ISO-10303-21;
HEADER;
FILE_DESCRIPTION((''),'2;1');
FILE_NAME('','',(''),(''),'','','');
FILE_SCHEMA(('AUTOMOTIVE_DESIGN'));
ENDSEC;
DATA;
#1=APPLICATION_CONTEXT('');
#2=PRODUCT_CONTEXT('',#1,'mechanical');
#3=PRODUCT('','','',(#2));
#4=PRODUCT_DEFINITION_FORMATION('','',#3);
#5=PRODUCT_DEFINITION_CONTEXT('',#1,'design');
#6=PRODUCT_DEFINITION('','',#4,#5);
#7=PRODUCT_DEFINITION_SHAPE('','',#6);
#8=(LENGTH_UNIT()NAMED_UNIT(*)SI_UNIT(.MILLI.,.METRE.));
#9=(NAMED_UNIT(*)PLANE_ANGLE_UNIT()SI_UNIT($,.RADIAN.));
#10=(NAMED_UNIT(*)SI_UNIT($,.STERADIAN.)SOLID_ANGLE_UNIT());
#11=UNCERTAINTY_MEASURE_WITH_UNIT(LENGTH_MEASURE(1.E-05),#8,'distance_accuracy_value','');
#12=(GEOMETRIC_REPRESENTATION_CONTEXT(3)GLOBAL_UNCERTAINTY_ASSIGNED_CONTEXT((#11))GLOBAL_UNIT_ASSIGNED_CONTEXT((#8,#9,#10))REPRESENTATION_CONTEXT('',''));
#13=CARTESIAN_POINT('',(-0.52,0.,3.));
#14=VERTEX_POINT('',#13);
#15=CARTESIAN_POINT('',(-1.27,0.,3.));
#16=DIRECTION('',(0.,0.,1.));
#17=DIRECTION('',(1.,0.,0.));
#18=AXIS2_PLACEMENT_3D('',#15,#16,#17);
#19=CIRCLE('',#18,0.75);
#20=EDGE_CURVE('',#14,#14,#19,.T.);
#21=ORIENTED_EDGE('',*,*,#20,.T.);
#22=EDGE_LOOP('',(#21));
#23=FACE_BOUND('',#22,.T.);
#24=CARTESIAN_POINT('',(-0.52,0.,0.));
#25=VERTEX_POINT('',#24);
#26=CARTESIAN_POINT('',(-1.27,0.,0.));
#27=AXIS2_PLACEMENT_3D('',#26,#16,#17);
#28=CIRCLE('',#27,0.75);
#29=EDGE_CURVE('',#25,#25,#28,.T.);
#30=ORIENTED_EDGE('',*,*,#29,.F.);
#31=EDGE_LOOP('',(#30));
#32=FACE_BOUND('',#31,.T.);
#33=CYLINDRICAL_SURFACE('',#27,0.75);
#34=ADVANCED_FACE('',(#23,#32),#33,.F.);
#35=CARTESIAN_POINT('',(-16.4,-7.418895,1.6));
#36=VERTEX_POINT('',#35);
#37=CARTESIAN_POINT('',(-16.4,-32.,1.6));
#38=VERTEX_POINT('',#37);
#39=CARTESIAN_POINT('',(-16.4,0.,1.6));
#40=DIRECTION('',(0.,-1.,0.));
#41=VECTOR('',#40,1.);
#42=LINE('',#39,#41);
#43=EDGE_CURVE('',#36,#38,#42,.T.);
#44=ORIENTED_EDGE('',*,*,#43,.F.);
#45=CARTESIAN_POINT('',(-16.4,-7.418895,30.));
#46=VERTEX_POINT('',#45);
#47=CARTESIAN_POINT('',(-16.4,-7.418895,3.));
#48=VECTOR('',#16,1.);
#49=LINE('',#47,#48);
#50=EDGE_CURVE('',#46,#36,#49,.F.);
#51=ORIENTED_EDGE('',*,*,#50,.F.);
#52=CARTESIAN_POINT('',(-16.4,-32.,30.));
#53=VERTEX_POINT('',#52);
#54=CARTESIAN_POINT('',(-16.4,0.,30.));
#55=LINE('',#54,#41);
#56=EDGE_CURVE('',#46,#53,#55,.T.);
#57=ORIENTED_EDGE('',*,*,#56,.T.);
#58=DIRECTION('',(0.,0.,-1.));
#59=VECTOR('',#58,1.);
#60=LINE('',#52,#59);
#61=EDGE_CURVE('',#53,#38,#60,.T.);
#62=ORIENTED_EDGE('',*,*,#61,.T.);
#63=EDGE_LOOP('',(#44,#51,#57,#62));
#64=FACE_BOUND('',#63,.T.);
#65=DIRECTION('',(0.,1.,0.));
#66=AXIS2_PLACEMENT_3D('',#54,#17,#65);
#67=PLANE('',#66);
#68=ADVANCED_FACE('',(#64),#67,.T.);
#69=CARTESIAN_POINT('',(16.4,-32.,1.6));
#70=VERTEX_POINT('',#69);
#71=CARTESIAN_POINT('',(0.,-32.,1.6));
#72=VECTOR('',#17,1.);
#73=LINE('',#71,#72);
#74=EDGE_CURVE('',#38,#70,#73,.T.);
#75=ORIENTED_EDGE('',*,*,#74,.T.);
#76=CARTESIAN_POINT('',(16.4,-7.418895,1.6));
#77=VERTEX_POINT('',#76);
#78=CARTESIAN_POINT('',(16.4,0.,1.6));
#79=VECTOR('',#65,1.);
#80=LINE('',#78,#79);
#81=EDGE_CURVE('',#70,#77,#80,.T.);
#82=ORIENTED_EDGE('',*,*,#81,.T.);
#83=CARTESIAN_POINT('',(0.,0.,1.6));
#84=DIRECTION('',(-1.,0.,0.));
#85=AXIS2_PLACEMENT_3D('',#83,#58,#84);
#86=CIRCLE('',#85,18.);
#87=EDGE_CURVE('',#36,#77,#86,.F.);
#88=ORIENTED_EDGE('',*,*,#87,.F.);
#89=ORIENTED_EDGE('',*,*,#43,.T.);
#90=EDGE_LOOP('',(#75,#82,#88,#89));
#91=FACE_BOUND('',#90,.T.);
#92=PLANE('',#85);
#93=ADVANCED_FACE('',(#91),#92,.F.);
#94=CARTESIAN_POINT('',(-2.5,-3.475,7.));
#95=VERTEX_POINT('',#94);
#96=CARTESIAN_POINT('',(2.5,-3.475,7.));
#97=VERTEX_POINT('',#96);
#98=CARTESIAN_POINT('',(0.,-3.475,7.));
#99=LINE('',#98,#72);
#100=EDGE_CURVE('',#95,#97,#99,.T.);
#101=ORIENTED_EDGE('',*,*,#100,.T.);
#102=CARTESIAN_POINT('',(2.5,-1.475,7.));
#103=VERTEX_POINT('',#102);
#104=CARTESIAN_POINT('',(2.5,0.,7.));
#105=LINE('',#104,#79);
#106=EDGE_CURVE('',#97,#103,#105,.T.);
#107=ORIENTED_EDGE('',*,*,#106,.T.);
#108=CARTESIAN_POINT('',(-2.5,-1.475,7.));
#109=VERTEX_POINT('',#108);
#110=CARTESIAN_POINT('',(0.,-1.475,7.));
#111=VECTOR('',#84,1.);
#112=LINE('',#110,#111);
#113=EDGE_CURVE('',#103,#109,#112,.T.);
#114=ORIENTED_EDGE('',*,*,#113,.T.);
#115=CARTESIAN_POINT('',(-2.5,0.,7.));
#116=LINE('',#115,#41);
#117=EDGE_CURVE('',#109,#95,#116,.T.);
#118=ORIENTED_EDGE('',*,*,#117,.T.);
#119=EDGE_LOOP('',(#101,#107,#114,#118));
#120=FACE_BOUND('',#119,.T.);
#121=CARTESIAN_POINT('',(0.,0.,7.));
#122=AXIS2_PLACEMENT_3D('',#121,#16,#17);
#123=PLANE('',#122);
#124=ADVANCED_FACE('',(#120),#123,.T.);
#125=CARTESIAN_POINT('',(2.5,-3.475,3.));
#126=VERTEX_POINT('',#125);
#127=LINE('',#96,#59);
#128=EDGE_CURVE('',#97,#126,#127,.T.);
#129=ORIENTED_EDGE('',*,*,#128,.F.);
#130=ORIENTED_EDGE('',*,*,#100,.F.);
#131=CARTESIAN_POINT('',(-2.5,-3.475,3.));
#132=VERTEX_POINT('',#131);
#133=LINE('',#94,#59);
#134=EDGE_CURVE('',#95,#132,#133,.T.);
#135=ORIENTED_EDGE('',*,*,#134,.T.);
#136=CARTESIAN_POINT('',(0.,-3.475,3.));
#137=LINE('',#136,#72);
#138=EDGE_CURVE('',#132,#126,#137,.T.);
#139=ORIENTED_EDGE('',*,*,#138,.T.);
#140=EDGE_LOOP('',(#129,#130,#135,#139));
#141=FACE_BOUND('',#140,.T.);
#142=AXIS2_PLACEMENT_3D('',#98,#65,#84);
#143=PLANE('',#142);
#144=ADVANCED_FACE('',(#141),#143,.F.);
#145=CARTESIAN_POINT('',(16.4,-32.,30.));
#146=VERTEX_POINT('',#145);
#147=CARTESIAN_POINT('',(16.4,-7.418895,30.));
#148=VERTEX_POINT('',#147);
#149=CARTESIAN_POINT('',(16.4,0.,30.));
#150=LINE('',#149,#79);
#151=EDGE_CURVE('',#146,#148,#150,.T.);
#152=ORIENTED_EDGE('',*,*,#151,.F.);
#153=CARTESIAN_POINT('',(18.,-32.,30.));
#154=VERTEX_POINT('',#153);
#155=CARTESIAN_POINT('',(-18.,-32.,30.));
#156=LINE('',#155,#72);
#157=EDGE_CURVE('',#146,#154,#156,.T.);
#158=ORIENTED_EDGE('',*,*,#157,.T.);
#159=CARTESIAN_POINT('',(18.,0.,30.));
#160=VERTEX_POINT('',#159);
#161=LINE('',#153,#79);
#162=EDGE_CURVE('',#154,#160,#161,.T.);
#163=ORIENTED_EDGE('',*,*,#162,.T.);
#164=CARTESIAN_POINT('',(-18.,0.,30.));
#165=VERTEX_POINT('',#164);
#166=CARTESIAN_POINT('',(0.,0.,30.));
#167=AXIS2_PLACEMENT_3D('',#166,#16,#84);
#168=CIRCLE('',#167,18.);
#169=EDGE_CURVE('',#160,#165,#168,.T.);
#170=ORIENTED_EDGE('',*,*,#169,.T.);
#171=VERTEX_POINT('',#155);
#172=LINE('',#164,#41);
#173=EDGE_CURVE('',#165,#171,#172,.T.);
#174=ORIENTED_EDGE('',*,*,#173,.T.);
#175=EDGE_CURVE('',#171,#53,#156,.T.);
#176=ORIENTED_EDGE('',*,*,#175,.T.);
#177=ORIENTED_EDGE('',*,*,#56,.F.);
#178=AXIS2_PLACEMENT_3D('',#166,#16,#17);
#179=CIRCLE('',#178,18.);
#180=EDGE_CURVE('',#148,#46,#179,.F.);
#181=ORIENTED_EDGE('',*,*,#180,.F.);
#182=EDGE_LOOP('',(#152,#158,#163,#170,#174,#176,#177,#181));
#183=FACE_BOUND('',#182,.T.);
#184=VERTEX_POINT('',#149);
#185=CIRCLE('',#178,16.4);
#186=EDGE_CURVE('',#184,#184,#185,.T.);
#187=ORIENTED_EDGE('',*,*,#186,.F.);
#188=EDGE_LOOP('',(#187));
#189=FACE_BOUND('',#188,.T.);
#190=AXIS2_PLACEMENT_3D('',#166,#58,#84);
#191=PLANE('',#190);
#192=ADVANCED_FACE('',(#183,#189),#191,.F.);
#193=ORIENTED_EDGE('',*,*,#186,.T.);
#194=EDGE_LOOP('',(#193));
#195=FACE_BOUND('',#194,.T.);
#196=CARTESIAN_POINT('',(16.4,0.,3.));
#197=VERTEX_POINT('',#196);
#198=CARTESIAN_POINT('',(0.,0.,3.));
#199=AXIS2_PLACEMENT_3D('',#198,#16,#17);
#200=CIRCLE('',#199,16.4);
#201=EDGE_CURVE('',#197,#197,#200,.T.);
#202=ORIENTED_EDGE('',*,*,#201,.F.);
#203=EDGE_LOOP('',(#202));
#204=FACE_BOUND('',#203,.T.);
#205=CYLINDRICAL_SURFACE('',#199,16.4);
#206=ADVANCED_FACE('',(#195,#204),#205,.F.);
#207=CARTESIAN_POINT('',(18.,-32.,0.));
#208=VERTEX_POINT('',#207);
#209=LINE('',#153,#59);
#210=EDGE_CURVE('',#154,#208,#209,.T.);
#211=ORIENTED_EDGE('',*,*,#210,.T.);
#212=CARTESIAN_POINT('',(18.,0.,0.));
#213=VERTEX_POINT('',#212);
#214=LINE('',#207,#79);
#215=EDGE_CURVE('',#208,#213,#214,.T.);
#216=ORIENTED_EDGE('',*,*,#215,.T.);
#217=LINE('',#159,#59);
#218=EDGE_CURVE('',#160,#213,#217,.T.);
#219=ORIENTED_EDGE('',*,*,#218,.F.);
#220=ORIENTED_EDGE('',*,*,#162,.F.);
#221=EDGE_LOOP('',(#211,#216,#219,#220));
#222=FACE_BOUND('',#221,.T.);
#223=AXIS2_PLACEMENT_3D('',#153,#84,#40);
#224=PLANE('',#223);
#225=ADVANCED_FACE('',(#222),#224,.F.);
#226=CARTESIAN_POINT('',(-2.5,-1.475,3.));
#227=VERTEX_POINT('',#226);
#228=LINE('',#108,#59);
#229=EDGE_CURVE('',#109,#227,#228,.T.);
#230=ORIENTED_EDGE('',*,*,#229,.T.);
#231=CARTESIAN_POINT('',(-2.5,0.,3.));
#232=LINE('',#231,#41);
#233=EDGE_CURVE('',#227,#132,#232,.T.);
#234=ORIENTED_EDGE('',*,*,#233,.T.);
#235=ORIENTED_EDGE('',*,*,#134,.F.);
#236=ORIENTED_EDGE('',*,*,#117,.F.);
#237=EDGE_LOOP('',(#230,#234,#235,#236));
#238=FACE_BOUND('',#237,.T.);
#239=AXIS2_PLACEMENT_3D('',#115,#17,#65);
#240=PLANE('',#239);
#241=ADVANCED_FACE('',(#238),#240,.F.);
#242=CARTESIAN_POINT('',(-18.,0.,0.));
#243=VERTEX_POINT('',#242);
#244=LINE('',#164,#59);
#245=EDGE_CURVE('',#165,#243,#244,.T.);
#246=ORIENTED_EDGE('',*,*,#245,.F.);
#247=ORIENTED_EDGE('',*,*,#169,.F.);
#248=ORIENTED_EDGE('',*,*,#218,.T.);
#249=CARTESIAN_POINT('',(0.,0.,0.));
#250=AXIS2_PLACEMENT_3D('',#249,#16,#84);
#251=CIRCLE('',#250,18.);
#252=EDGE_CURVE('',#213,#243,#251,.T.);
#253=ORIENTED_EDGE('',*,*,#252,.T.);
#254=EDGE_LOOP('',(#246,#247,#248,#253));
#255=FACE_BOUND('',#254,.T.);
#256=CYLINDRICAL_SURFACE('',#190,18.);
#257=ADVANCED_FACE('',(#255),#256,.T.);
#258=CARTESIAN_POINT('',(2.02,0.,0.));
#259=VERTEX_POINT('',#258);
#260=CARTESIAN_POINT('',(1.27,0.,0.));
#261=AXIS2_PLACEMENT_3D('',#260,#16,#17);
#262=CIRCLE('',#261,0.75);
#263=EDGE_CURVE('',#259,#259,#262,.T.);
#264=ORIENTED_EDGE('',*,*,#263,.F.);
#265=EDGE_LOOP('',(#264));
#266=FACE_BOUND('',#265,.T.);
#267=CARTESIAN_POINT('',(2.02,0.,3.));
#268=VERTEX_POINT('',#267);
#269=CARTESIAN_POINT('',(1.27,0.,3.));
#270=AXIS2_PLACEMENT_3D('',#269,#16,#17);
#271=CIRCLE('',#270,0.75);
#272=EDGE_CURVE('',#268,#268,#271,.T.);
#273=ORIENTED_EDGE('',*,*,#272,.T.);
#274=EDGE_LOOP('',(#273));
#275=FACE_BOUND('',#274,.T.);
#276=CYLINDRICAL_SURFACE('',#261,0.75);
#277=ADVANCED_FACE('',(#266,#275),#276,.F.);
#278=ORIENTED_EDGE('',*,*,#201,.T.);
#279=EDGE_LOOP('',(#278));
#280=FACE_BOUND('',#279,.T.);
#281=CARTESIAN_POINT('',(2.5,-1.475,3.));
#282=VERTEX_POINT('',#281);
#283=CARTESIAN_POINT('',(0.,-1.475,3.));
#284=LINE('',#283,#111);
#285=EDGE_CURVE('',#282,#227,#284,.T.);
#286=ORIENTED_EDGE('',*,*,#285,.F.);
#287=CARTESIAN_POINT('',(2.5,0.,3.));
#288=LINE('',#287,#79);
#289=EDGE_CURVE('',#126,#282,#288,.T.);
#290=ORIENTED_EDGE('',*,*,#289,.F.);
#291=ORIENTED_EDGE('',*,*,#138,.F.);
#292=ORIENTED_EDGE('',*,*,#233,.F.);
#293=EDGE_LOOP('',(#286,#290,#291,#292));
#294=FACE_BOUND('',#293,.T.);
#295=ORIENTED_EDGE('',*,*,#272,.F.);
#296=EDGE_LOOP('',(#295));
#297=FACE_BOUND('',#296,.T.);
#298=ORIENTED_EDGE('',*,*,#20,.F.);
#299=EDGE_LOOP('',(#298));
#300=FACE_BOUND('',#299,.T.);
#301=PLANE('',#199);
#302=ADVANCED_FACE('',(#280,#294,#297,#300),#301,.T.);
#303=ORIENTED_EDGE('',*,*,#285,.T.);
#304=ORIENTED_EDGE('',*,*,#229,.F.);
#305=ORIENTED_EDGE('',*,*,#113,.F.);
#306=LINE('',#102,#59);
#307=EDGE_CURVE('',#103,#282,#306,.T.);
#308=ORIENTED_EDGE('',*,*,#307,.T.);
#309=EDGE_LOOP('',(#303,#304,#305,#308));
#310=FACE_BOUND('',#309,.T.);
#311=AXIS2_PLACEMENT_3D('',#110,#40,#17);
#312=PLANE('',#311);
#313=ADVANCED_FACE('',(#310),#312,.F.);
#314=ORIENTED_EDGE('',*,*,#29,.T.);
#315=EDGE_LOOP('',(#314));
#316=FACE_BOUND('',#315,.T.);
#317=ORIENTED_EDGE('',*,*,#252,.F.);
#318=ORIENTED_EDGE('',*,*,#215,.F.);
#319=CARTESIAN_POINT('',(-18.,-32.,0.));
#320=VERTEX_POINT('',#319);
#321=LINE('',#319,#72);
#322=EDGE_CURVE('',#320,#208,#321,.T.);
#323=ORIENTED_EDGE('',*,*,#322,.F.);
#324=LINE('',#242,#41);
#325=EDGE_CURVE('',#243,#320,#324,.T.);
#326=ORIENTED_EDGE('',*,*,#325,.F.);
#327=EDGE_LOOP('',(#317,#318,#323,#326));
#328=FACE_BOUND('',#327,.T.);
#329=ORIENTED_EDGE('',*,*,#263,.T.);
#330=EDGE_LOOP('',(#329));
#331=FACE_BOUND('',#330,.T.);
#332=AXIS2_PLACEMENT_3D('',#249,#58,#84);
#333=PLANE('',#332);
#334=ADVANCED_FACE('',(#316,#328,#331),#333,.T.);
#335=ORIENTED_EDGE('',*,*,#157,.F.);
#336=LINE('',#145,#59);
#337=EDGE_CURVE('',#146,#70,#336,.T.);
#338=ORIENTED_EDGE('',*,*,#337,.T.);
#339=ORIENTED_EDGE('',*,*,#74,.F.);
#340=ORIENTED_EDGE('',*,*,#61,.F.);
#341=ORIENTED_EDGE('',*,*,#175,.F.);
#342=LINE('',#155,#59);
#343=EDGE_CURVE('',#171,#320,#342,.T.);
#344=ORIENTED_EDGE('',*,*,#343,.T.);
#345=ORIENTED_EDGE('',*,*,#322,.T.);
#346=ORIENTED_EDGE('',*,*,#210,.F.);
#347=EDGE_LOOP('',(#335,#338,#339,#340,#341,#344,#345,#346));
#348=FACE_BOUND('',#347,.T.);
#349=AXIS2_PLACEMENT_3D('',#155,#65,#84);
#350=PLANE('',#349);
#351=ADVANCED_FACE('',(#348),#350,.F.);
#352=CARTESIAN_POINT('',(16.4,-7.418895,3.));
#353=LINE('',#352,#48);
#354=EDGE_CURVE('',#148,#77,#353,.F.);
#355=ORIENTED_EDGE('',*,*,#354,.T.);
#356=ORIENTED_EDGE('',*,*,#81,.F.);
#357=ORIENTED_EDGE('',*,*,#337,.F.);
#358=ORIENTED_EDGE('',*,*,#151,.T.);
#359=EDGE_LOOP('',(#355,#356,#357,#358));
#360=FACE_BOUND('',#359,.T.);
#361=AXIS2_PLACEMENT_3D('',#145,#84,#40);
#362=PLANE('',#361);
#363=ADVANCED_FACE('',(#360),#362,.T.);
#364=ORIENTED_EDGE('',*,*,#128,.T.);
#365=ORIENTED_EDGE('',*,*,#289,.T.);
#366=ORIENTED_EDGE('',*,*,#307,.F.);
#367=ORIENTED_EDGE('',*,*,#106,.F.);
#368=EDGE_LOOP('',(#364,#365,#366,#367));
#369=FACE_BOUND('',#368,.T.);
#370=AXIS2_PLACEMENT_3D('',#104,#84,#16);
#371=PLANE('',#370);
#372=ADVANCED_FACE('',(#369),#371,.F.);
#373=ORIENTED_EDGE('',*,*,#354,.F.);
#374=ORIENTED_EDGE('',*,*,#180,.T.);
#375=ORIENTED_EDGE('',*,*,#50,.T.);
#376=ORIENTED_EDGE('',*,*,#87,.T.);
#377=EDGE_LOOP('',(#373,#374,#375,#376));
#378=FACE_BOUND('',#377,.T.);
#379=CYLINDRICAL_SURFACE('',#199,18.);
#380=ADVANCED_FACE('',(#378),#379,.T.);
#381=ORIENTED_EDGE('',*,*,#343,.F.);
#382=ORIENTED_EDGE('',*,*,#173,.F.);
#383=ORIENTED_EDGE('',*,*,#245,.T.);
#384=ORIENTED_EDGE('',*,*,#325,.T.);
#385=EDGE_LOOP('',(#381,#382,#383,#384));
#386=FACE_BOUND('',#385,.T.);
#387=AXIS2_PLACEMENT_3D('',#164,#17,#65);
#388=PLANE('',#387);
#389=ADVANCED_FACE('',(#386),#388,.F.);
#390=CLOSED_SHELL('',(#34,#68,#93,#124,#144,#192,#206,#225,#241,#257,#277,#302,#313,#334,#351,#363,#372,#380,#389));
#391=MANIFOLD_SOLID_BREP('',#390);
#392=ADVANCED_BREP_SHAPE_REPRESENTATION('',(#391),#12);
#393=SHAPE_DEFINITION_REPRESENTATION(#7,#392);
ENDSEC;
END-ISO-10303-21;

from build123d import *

# Parameters (mm, degrees)
BOSS_EXTRUDE1_DEPTH            = 30
CUT_EXTRUDE1_DEPTH             = 27
SKETCH4_R                      = 0.75
CUT_EXTRUDE2_DEPTH             = 46.57411546
SKETCH5_W                      = 5
SKETCH5_H                      = 2
BOSS_EXTRUDE2_DEPTH            = 4
SHELL1_START                   = 1.6
SHELL1_DEPTH                   = 26.8
CUT_EXTRUDE3_REACH             = 49.413
CUT_EXTRUDE3_DIRECTION_2_DEPTH = 48.413078365


# Read off the part's stored shape, not the designer's step: Shell1
with BuildPart() as part:
    # Sketch2 → Boss-Extrude1 (new body)
    with BuildSketch(Plane.XY):
        with BuildLine():
            Line((-18, 0), (-18, -32))
            Line((-18, -32), (18, -32))
            Line((18, -32), (18, 0))
            ThreePointArc((18, 0), (0, 18), (-18, 0))
        make_face()
    extrude(amount=BOSS_EXTRUDE1_DEPTH)

    # Sketch3 → Cut-Extrude1 (cut)
    with BuildSketch(Plane.XY.offset(30)):
        with BuildLine():
            ThreePointArc((-16.4, 0), (0, -16.4), (16.4, 0))
            ThreePointArc((16.4, 0), (0, 16.4), (-16.4, 0))
        make_face()
    extrude(amount=-CUT_EXTRUDE1_DEPTH, mode=Mode.SUBTRACT)

    # Sketch4 → Cut-Extrude2 (cut, through all)
    with BuildSketch(Plane.XY.offset(3)):
        with Locations((-1.27, 0)):
            Circle(SKETCH4_R)
        with Locations((1.27, 0)):
            Circle(SKETCH4_R)
    extrude(amount=-CUT_EXTRUDE2_DEPTH, mode=Mode.SUBTRACT)

    # Sketch5 → Boss-Extrude2 (add)
    with BuildSketch(Plane.XY.offset(3)):
        with Locations((0, -2.475)):
            Rectangle(SKETCH5_W, SKETCH5_H)
    extrude(amount=BOSS_EXTRUDE2_DEPTH)

    # Shell1 outline → Shell1 (cut)
    with BuildSketch(Plane.XY.offset(SHELL1_START)):
        with BuildLine():
            ThreePointArc((16.4, -7.418894796), (0, -18), (-16.4, -7.418894796))
            Line((-16.4, -7.418894796), (-16.4, -32))
            Line((-16.4, -32), (16.4, -32))
            Line((16.4, -32), (16.4, -7.418894796))
        make_face()
    extrude(amount=SHELL1_DEPTH, mode=Mode.SUBTRACT)

    # Sketch6 → Cut-Extrude3 (cut, up to next)
    with BuildSketch(Plane.XY.offset(30), mode=Mode.PRIVATE) as cut_extrude3_sk1:
        with BuildLine():
            Line((-16.4, -32), (16.4, -32))
            Line((16.4, -32), (16.4, -7.418894796))
            ThreePointArc((16.4, -7.418894796), (0, -18), (-16.4, -7.418894796))
            Line((-16.4, -7.418894796), (-16.4, -32))
        make_face()
    cut_extrude3_tool1 = extrude(cut_extrude3_sk1.sketch, amount=-CUT_EXTRUDE3_REACH, mode=Mode.PRIVATE) & part.part
    add(cut_extrude3_tool1.solids().sort_by_distance((0, -23.265352, 30))[0], mode=Mode.SUBTRACT)

    # Sketch6 → Cut-Extrude3 direction 2 (cut)
    with BuildSketch(Plane.XY.offset(30)):
        with BuildLine():
            Line((-16.4, -32), (16.4, -32))
            Line((16.4, -32), (16.4, -7.418894796))
            ThreePointArc((16.4, -7.418894796), (0, -18), (-16.4, -7.418894796))
            Line((-16.4, -7.418894796), (-16.4, -32))
        make_face()
    extrude(amount=CUT_EXTRUDE3_DIRECTION_2_DEPTH, mode=Mode.SUBTRACT)


solid = part.part
